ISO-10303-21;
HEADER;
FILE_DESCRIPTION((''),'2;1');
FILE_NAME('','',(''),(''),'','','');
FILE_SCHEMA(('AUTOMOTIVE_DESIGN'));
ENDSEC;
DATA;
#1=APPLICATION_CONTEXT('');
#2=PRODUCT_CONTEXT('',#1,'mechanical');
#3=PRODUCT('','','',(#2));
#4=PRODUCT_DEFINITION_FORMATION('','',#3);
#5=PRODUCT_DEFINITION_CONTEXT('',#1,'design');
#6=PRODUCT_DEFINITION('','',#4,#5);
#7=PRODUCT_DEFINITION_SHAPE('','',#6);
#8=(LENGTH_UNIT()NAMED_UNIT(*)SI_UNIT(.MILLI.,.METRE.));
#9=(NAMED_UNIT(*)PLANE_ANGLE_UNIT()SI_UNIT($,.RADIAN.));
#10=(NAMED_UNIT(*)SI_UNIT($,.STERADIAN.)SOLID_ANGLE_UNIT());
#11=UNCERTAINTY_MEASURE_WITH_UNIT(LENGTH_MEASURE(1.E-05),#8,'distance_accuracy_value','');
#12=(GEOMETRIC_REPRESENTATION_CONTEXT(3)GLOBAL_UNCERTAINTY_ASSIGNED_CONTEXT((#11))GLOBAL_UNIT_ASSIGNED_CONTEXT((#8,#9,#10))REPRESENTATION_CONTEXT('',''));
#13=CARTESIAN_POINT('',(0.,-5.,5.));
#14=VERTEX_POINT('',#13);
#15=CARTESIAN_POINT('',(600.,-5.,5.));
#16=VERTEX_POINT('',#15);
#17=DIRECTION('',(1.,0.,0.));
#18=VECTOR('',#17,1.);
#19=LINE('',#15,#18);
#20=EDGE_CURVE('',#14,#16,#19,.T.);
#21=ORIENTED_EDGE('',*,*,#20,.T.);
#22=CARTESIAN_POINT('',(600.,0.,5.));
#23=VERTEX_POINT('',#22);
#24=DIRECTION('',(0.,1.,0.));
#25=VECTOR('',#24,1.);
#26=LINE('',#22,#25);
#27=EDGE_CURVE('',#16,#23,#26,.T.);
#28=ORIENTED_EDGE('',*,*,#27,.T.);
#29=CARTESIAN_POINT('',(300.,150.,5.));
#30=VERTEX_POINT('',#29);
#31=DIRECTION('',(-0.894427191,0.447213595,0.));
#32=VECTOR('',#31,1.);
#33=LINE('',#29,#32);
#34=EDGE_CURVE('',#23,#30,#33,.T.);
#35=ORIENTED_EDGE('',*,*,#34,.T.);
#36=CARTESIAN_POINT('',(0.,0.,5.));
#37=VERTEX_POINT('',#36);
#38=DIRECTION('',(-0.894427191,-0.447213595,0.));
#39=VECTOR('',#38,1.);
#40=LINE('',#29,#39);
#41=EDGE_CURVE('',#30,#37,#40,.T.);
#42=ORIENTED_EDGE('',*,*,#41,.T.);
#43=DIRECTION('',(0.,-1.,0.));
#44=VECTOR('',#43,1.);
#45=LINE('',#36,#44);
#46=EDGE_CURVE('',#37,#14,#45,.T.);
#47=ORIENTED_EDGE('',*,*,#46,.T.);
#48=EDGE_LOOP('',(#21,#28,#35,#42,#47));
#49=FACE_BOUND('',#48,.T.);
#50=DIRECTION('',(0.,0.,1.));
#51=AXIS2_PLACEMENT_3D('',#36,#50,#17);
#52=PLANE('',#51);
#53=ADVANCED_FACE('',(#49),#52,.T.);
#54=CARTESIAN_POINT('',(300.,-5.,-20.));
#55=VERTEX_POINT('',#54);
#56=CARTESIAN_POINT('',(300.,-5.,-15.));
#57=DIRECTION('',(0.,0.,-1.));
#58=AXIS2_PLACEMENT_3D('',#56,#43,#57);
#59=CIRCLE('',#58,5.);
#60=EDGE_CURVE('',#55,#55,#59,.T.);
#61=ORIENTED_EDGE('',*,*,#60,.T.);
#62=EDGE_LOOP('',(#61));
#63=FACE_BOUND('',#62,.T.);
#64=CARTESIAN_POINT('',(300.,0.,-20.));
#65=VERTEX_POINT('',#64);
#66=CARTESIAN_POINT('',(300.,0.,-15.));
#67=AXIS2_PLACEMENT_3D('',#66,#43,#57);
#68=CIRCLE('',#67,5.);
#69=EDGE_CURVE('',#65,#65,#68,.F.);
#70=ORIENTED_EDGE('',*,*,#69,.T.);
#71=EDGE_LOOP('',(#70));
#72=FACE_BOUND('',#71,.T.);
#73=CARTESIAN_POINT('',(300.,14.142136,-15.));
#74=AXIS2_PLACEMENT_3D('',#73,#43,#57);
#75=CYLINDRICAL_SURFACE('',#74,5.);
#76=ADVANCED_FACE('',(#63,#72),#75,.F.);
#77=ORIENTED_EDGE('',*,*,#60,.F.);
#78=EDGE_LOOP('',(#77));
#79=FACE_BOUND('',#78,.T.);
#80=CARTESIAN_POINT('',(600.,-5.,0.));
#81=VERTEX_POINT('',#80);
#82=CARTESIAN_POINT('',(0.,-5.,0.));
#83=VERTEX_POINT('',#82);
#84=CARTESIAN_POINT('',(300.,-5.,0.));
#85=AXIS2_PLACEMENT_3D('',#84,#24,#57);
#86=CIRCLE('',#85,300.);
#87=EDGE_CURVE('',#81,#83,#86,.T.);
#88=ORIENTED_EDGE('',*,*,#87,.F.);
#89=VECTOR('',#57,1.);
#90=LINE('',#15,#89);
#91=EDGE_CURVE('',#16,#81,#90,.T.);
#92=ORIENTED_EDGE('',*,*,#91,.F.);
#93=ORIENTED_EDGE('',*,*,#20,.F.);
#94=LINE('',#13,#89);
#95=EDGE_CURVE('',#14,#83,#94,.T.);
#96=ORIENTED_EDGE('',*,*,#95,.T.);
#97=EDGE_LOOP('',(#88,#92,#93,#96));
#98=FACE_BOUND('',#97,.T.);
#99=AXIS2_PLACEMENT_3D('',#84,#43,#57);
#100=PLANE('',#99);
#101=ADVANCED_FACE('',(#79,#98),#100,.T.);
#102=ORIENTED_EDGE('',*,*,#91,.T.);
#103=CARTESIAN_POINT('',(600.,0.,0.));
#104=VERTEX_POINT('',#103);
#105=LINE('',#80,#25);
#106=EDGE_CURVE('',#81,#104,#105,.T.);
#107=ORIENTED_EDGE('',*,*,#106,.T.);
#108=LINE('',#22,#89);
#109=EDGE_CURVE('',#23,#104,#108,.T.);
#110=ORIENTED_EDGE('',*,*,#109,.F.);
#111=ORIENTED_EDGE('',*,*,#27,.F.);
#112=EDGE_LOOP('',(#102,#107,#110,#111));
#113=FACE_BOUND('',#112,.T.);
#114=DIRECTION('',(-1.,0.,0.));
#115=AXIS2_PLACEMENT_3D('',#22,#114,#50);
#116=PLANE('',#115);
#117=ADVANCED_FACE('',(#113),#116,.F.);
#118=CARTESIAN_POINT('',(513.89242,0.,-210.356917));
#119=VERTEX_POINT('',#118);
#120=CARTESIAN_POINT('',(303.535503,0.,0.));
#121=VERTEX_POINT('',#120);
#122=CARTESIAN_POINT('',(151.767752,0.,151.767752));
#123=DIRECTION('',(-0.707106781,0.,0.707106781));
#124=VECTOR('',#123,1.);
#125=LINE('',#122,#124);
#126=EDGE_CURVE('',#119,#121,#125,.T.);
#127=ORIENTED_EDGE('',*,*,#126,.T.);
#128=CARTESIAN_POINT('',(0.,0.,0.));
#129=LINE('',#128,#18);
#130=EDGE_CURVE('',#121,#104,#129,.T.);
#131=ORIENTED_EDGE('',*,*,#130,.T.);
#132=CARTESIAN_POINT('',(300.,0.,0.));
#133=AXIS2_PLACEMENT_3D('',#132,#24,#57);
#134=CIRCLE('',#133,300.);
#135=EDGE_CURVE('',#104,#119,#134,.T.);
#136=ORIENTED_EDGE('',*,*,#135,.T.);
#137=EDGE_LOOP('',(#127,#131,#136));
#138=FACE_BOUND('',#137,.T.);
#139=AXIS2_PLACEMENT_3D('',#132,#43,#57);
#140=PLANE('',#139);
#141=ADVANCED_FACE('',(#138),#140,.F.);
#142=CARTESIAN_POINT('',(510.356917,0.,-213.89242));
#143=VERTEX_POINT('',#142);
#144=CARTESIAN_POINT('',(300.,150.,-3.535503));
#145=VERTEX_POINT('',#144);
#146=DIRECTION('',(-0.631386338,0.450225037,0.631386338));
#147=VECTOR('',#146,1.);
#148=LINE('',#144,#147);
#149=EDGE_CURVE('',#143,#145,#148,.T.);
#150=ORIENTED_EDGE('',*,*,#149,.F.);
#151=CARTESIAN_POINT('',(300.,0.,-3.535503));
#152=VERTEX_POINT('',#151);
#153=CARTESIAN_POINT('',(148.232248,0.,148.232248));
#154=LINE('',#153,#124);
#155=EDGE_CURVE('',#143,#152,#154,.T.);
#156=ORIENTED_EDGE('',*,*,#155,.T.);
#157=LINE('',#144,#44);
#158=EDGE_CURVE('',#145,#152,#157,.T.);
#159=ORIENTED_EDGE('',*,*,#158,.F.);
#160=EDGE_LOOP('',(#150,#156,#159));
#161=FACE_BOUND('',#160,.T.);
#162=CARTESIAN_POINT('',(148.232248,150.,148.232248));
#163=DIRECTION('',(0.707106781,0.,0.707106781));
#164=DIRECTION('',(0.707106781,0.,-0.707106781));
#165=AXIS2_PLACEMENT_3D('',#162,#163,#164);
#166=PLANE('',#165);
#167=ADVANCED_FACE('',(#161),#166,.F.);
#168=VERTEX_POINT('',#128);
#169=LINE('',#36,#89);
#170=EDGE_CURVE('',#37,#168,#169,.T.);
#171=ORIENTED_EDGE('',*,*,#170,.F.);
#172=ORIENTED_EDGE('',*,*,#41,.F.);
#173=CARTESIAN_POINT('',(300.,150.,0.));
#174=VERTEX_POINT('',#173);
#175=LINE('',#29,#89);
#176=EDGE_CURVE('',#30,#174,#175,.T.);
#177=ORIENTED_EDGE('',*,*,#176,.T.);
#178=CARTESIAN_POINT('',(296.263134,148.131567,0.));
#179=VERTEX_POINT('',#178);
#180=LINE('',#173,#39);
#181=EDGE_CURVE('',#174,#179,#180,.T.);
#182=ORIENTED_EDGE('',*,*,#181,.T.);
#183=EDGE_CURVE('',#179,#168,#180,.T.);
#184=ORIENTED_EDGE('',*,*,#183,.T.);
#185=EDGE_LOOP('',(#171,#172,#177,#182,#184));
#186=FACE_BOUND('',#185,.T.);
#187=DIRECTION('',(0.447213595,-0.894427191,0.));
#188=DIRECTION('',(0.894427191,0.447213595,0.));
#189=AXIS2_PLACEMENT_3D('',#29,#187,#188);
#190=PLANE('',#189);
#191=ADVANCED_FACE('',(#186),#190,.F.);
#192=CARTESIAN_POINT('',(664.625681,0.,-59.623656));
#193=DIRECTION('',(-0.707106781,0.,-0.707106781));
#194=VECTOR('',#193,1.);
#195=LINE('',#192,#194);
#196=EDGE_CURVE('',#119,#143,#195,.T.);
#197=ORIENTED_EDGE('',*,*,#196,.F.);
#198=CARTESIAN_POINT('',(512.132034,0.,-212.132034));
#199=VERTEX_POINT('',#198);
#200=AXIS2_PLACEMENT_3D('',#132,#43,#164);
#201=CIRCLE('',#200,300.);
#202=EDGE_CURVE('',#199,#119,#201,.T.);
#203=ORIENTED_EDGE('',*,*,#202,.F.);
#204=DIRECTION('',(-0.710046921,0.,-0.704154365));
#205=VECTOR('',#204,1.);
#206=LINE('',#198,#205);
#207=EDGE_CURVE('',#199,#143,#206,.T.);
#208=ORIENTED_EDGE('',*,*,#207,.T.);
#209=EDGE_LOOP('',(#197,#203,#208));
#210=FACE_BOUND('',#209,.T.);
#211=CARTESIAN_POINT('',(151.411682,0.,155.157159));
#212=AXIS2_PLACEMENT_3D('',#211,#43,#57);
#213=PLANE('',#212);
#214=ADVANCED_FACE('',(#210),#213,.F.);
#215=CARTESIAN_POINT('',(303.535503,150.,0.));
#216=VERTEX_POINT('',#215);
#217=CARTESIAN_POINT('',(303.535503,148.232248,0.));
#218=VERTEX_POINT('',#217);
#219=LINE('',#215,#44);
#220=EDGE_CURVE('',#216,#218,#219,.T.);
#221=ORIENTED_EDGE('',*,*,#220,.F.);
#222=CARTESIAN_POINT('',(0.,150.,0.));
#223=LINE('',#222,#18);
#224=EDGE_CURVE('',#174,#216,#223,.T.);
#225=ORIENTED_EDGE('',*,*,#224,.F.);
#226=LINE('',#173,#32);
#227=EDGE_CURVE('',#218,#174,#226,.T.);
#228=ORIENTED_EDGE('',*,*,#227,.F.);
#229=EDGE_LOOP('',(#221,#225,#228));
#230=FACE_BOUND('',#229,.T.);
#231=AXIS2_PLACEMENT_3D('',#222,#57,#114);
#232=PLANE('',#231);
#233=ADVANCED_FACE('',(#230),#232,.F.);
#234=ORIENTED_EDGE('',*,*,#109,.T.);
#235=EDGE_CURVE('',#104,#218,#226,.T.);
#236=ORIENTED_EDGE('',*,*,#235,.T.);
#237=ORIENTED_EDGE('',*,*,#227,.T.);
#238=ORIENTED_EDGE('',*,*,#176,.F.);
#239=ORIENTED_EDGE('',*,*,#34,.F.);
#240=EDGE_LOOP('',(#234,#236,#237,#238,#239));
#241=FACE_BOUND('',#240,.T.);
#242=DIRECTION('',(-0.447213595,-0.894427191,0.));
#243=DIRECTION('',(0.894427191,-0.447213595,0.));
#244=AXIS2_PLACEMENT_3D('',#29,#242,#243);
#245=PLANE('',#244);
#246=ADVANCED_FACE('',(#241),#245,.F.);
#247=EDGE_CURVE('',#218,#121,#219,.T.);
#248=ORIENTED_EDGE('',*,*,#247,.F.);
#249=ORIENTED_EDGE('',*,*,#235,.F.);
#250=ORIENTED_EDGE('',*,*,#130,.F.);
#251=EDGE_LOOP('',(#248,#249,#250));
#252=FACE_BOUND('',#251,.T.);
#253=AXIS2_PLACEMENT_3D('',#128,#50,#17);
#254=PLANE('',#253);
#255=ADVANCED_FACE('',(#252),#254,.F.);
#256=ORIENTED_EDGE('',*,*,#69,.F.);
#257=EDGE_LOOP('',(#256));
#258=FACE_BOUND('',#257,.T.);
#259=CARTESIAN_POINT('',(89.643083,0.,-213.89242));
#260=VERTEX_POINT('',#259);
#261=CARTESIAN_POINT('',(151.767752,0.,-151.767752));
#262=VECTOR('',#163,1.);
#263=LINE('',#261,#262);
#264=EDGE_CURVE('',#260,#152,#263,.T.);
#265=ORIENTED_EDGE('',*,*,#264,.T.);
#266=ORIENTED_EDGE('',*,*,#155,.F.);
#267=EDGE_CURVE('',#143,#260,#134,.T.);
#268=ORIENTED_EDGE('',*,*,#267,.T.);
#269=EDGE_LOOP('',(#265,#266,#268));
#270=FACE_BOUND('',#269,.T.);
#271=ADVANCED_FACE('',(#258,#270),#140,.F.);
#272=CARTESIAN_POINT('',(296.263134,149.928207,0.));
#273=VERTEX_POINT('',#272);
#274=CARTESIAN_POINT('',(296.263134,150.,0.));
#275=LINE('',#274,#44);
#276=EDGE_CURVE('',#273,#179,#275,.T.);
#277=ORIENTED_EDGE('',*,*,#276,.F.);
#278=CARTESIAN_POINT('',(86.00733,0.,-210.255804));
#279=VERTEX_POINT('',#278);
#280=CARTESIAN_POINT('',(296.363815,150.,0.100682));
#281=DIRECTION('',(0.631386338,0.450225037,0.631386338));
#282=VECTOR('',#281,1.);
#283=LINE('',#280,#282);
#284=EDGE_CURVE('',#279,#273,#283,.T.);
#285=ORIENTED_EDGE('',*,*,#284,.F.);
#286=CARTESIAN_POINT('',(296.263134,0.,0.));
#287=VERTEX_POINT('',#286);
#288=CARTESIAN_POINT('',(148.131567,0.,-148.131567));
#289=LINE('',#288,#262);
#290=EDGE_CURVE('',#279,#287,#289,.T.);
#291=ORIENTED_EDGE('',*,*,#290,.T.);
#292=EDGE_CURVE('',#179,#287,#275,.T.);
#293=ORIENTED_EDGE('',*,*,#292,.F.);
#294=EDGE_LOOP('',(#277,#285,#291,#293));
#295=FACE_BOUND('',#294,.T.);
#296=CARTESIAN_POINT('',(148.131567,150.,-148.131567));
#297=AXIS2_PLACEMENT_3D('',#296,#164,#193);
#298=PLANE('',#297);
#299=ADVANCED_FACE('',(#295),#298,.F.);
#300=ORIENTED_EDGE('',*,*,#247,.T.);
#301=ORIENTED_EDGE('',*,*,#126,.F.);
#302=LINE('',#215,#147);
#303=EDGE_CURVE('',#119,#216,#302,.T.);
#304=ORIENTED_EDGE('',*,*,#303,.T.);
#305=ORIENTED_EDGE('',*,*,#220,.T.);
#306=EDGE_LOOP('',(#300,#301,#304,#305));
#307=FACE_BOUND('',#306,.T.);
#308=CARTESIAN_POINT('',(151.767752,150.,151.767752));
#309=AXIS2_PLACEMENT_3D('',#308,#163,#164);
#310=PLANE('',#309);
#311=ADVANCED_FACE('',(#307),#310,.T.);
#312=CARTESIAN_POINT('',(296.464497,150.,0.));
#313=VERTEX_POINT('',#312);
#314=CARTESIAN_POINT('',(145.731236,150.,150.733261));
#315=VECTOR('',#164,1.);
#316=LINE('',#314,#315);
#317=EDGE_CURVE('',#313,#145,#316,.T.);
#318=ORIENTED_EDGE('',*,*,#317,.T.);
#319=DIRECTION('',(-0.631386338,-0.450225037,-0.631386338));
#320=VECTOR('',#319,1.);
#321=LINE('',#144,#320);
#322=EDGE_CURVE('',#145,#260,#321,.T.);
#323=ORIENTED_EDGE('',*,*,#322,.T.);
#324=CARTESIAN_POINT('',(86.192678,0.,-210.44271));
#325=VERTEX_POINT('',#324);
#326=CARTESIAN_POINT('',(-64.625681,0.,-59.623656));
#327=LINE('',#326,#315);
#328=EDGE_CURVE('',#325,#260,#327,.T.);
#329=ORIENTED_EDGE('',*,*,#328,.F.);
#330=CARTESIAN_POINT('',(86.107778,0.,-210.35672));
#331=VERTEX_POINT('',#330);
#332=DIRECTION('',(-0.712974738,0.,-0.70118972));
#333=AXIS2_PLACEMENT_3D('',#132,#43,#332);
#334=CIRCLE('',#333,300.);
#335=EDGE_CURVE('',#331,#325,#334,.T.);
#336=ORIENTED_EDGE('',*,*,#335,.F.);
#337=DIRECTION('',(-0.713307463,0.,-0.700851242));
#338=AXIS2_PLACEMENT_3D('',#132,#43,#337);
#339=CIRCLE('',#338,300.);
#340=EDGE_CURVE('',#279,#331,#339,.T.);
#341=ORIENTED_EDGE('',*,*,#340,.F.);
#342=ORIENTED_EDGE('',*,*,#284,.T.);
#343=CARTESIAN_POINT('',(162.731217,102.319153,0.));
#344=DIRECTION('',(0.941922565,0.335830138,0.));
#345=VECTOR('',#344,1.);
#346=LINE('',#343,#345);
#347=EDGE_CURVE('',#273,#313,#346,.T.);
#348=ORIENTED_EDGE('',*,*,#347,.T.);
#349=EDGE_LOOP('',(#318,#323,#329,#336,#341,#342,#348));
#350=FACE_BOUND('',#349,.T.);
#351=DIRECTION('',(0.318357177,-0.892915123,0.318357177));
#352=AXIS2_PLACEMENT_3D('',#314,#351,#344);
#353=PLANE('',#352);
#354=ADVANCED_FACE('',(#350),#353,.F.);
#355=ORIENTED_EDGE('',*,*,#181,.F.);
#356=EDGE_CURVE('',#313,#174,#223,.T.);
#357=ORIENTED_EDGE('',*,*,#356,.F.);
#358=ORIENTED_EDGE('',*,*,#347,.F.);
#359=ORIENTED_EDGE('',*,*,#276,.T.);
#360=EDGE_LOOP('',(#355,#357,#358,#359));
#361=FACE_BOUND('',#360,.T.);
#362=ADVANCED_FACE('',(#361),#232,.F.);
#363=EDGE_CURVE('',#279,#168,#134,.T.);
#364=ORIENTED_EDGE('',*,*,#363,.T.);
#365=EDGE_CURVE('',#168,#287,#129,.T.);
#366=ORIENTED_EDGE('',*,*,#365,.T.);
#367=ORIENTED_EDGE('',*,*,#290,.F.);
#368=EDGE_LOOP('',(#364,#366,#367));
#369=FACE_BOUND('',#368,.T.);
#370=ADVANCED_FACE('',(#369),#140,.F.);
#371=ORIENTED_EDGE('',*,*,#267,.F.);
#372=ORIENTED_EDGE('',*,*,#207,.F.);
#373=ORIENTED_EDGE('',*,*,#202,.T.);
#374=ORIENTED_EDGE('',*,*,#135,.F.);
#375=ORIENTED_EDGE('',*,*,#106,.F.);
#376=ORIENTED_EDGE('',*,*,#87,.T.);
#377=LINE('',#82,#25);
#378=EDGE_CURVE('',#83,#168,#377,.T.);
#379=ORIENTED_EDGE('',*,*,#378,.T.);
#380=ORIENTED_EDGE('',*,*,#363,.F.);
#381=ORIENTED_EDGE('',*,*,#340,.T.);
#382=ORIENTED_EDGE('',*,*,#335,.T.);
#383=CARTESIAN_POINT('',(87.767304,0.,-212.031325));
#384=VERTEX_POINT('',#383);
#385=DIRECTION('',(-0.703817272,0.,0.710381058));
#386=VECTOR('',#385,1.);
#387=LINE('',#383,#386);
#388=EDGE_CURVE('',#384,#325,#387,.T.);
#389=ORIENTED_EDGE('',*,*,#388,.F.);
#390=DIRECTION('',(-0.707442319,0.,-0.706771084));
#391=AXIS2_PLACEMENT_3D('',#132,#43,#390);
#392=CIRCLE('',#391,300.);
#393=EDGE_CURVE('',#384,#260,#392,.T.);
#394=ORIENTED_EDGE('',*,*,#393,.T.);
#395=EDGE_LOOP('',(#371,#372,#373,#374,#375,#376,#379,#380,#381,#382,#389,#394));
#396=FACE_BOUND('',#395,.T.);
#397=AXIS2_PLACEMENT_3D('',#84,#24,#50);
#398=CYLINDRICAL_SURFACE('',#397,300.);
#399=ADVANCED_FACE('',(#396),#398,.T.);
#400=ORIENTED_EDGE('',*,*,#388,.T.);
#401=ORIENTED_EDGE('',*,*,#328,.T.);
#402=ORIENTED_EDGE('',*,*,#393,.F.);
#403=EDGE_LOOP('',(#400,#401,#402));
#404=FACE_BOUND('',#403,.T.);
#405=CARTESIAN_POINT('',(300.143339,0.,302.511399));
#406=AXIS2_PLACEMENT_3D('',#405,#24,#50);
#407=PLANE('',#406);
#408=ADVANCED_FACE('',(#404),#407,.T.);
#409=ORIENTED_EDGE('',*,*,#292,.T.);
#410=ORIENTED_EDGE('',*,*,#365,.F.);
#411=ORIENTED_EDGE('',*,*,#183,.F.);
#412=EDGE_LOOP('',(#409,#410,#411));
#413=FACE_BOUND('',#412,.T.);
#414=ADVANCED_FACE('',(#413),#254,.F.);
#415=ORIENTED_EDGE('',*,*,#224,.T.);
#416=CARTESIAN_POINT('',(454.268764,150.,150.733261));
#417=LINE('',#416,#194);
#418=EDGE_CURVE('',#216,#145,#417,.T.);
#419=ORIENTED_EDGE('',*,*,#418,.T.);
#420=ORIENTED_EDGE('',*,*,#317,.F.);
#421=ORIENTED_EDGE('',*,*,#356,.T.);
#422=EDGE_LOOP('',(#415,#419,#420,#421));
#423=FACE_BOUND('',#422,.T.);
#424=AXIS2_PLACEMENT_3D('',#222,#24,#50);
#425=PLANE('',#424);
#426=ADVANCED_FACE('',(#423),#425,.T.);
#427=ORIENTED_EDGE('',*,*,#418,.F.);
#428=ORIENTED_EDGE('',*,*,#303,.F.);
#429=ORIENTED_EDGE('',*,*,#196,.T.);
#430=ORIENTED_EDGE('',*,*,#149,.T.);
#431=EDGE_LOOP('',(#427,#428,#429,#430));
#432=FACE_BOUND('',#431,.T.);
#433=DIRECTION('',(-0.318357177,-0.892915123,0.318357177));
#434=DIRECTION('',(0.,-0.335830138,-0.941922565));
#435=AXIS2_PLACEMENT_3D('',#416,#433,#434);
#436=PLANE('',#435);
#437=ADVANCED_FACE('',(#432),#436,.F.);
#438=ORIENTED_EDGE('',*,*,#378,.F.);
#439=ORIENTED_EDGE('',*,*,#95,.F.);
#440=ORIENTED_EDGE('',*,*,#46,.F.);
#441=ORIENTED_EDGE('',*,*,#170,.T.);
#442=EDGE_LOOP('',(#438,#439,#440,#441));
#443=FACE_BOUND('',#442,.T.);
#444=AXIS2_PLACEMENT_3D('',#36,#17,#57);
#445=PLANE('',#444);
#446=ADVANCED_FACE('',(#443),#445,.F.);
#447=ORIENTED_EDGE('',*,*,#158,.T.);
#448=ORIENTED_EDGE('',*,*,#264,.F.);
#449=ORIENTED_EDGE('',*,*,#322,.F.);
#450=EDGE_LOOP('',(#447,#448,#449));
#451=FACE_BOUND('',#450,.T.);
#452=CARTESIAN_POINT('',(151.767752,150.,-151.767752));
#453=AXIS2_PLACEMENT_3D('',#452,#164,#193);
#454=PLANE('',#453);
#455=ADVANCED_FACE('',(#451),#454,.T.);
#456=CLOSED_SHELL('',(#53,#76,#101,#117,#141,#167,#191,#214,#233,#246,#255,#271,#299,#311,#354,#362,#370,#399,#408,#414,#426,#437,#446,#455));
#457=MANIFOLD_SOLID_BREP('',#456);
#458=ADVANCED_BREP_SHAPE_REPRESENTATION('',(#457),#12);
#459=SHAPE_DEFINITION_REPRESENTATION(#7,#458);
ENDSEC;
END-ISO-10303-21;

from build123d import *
from OCP.BRepAlgoAPI import BRepAlgoAPI_Cut
from OCP.TopTools import TopTools_ListOfShape

# Parameters (mm, degrees)
SALIENTE_EXTRUIR1_DEPTH = 5
SALIENTE_EXTRUIR2_DEPTH = 5
SALIENTE_EXTRUIR3_DEPTH = 150
CORTAR_EXTRUIR1_REACH   = 655.84
CORTAR_EXTRUIR2_REACH   = 499.984
CORTAR_EXTRUIR3_REACH   = 538.214
CROQUIS6_W              = 4.999913194
CROQUIS6_H              = 150
CORTAR_EXTRUIR4_DEPTH   = 150
CROQUIS8_R              = 5
CORTAR_EXTRUIR5_DEPTH   = 5


with BuildPart() as part:
    # Croquis1 → Saliente-Extruir1 (new body)
    with BuildSketch(Plane(origin=(0, 0, 0), x_dir=(1, 0, 0), z_dir=(0, 1, 0))):
        with BuildLine():
            Line((0, 0), (600, 0))
            ThreePointArc((600, 0), (300, 300), (0, 0))
        make_face()
    extrude(amount=-SALIENTE_EXTRUIR1_DEPTH)

    # Croquis2 → Saliente-Extruir2 (add)
    with BuildSketch(Plane.XY):
        Polygon((300, 150), (600, 0), (600, -5), (0, -5), (0, 0), align=None)
    extrude(amount=SALIENTE_EXTRUIR2_DEPTH)

    # Croquis3 → Saliente-Extruir3 (add)
    with BuildSketch(Plane(origin=(0, 0, 0), x_dir=(1, 0, 0), z_dir=(0, 1, 0))):
        Polygon((89.643082947, 213.892420268), (87.767304207, 212.03132513), (86.007761026, 210.255372485), (296.263133511, 0), (300, 0), (303.535503215, 0), (300, 3.535503215), align=None)
        Polygon((510.356917053, 213.892420268), (300, 3.535503215), (303.535503215, 0), (513.892420268, 210.356917053), (512.132034356, 212.132034356), align=None)
    extrude(amount=SALIENTE_EXTRUIR3_DEPTH)

    # Croquis4 → Cortar-Extruir1 (cut, up to next)
    with BuildSketch(Plane(origin=(148.232248392, 0, 148.232248392), x_dir=(-0.7071067811865465, 0, 0.7071067811865487), z_dir=(-0.7071067811865487, 0, -0.7071067811865465)), mode=Mode.PRIVATE) as cortar_extruir1_sk1:
        Polygon((-214.632012654, 150), (-512.121617689, 0), (-512.121617689, 150), align=None)
    cortar_extruir1_tool1 = extrude(cortar_extruir1_sk1.sketch, amount=-CORTAR_EXTRUIR1_REACH, mode=Mode.PRIVATE) & part.part
    add(cortar_extruir1_tool1.solids().sort_by_distance((440.237945, 100, -143.773448))[0], mode=Mode.SUBTRACT)

    # Croquis5 → Cortar-Extruir2 (cut, up to next)
    with BuildSketch(Plane(origin=(151.767751608, 0, -151.767751608), x_dir=(-0.7071067811865488, 0, -0.7071067811865464), z_dir=(0.7071067811865464, 0, -0.7071067811865488)), mode=Mode.PRIVATE) as cortar_extruir2_sk1:
        Polygon((-209.632056057, 150), (87.857548977, 0), (87.857548977, 150), align=None)
    cortar_extruir2_tool1 = extrude(cortar_extruir2_sk1.sketch, amount=-CORTAR_EXTRUIR2_REACH, mode=Mode.PRIVATE) & part.part
    add(cortar_extruir2_tool1.solids().sort_by_distance((159.762055, 100, -143.773448))[0], mode=Mode.SUBTRACT)

    # Croquis6 → Cortar-Extruir3 (cut, up to next)
    with BuildSketch(Plane(origin=(359.994486555, 0, -363.007018979), x_dir=(-0.7100469213351532, 0, -0.7041543648252638), z_dir=(0.7041543648252638, 0, -0.7100469213351532)), mode=Mode.PRIVATE) as cortar_extruir3_sk1:
        with Locations((-214.264032998, 75)):
            Rectangle(CROQUIS6_W, CROQUIS6_H)
    cortar_extruir3_tool1 = extrude(cortar_extruir3_sk1.sketch, amount=-CORTAR_EXTRUIR3_REACH, mode=Mode.PRIVATE) & part.part
    add(cortar_extruir3_tool1.solids().sort_by_distance((512.132004, 75, -212.132065))[0], mode=Mode.SUBTRACT)


with BuildPart() as cortar_extruir4_tool:
    # Cortar-Extruir4: read off the stored shape, not the designer's step
    # Cortar-Extruir4 outline → Cortar-Extruir4 (new body)
    with BuildSketch(Plane(origin=(0, 0, 0), x_dir=(1, 0, 0), z_dir=(0, 1, 0))):
        Polygon((87.767304207, 212.03132513), (86.192818289, 210.442155589), (89.643082947, 213.892420268), align=None)
    extrude(amount=CORTAR_EXTRUIR4_DEPTH)


with BuildPart() as part_1:
    add(part.part)

    # Cortar-Extruir4: cut by cortar_extruir4_tool, with a tolerance
    cortar_extruir4_stock = TopTools_ListOfShape()
    cortar_extruir4_stock.Append(part_1.part.wrapped)
    cortar_extruir4_tools = TopTools_ListOfShape()
    cortar_extruir4_tools.Append(cortar_extruir4_tool.part.wrapped)
    cortar_extruir4_cut = BRepAlgoAPI_Cut()
    cortar_extruir4_cut.SetArguments(cortar_extruir4_stock)
    cortar_extruir4_cut.SetTools(cortar_extruir4_tools)
    cortar_extruir4_cut.SetFuzzyValue(0.00001)
    cortar_extruir4_cut.Build()
    add(Compound.cast(cortar_extruir4_cut.Shape()).solids(), mode=Mode.REPLACE)

    # Croquis8 → Cortar-Extruir5 (cut)
    with BuildSketch(Plane.XZ.offset(5)):
        with Locations(Location((300, -15, 0), (0, 0, 270))):
            Circle(CROQUIS8_R)
    extrude(amount=-CORTAR_EXTRUIR5_DEPTH, mode=Mode.SUBTRACT)


solid = part_1.part
